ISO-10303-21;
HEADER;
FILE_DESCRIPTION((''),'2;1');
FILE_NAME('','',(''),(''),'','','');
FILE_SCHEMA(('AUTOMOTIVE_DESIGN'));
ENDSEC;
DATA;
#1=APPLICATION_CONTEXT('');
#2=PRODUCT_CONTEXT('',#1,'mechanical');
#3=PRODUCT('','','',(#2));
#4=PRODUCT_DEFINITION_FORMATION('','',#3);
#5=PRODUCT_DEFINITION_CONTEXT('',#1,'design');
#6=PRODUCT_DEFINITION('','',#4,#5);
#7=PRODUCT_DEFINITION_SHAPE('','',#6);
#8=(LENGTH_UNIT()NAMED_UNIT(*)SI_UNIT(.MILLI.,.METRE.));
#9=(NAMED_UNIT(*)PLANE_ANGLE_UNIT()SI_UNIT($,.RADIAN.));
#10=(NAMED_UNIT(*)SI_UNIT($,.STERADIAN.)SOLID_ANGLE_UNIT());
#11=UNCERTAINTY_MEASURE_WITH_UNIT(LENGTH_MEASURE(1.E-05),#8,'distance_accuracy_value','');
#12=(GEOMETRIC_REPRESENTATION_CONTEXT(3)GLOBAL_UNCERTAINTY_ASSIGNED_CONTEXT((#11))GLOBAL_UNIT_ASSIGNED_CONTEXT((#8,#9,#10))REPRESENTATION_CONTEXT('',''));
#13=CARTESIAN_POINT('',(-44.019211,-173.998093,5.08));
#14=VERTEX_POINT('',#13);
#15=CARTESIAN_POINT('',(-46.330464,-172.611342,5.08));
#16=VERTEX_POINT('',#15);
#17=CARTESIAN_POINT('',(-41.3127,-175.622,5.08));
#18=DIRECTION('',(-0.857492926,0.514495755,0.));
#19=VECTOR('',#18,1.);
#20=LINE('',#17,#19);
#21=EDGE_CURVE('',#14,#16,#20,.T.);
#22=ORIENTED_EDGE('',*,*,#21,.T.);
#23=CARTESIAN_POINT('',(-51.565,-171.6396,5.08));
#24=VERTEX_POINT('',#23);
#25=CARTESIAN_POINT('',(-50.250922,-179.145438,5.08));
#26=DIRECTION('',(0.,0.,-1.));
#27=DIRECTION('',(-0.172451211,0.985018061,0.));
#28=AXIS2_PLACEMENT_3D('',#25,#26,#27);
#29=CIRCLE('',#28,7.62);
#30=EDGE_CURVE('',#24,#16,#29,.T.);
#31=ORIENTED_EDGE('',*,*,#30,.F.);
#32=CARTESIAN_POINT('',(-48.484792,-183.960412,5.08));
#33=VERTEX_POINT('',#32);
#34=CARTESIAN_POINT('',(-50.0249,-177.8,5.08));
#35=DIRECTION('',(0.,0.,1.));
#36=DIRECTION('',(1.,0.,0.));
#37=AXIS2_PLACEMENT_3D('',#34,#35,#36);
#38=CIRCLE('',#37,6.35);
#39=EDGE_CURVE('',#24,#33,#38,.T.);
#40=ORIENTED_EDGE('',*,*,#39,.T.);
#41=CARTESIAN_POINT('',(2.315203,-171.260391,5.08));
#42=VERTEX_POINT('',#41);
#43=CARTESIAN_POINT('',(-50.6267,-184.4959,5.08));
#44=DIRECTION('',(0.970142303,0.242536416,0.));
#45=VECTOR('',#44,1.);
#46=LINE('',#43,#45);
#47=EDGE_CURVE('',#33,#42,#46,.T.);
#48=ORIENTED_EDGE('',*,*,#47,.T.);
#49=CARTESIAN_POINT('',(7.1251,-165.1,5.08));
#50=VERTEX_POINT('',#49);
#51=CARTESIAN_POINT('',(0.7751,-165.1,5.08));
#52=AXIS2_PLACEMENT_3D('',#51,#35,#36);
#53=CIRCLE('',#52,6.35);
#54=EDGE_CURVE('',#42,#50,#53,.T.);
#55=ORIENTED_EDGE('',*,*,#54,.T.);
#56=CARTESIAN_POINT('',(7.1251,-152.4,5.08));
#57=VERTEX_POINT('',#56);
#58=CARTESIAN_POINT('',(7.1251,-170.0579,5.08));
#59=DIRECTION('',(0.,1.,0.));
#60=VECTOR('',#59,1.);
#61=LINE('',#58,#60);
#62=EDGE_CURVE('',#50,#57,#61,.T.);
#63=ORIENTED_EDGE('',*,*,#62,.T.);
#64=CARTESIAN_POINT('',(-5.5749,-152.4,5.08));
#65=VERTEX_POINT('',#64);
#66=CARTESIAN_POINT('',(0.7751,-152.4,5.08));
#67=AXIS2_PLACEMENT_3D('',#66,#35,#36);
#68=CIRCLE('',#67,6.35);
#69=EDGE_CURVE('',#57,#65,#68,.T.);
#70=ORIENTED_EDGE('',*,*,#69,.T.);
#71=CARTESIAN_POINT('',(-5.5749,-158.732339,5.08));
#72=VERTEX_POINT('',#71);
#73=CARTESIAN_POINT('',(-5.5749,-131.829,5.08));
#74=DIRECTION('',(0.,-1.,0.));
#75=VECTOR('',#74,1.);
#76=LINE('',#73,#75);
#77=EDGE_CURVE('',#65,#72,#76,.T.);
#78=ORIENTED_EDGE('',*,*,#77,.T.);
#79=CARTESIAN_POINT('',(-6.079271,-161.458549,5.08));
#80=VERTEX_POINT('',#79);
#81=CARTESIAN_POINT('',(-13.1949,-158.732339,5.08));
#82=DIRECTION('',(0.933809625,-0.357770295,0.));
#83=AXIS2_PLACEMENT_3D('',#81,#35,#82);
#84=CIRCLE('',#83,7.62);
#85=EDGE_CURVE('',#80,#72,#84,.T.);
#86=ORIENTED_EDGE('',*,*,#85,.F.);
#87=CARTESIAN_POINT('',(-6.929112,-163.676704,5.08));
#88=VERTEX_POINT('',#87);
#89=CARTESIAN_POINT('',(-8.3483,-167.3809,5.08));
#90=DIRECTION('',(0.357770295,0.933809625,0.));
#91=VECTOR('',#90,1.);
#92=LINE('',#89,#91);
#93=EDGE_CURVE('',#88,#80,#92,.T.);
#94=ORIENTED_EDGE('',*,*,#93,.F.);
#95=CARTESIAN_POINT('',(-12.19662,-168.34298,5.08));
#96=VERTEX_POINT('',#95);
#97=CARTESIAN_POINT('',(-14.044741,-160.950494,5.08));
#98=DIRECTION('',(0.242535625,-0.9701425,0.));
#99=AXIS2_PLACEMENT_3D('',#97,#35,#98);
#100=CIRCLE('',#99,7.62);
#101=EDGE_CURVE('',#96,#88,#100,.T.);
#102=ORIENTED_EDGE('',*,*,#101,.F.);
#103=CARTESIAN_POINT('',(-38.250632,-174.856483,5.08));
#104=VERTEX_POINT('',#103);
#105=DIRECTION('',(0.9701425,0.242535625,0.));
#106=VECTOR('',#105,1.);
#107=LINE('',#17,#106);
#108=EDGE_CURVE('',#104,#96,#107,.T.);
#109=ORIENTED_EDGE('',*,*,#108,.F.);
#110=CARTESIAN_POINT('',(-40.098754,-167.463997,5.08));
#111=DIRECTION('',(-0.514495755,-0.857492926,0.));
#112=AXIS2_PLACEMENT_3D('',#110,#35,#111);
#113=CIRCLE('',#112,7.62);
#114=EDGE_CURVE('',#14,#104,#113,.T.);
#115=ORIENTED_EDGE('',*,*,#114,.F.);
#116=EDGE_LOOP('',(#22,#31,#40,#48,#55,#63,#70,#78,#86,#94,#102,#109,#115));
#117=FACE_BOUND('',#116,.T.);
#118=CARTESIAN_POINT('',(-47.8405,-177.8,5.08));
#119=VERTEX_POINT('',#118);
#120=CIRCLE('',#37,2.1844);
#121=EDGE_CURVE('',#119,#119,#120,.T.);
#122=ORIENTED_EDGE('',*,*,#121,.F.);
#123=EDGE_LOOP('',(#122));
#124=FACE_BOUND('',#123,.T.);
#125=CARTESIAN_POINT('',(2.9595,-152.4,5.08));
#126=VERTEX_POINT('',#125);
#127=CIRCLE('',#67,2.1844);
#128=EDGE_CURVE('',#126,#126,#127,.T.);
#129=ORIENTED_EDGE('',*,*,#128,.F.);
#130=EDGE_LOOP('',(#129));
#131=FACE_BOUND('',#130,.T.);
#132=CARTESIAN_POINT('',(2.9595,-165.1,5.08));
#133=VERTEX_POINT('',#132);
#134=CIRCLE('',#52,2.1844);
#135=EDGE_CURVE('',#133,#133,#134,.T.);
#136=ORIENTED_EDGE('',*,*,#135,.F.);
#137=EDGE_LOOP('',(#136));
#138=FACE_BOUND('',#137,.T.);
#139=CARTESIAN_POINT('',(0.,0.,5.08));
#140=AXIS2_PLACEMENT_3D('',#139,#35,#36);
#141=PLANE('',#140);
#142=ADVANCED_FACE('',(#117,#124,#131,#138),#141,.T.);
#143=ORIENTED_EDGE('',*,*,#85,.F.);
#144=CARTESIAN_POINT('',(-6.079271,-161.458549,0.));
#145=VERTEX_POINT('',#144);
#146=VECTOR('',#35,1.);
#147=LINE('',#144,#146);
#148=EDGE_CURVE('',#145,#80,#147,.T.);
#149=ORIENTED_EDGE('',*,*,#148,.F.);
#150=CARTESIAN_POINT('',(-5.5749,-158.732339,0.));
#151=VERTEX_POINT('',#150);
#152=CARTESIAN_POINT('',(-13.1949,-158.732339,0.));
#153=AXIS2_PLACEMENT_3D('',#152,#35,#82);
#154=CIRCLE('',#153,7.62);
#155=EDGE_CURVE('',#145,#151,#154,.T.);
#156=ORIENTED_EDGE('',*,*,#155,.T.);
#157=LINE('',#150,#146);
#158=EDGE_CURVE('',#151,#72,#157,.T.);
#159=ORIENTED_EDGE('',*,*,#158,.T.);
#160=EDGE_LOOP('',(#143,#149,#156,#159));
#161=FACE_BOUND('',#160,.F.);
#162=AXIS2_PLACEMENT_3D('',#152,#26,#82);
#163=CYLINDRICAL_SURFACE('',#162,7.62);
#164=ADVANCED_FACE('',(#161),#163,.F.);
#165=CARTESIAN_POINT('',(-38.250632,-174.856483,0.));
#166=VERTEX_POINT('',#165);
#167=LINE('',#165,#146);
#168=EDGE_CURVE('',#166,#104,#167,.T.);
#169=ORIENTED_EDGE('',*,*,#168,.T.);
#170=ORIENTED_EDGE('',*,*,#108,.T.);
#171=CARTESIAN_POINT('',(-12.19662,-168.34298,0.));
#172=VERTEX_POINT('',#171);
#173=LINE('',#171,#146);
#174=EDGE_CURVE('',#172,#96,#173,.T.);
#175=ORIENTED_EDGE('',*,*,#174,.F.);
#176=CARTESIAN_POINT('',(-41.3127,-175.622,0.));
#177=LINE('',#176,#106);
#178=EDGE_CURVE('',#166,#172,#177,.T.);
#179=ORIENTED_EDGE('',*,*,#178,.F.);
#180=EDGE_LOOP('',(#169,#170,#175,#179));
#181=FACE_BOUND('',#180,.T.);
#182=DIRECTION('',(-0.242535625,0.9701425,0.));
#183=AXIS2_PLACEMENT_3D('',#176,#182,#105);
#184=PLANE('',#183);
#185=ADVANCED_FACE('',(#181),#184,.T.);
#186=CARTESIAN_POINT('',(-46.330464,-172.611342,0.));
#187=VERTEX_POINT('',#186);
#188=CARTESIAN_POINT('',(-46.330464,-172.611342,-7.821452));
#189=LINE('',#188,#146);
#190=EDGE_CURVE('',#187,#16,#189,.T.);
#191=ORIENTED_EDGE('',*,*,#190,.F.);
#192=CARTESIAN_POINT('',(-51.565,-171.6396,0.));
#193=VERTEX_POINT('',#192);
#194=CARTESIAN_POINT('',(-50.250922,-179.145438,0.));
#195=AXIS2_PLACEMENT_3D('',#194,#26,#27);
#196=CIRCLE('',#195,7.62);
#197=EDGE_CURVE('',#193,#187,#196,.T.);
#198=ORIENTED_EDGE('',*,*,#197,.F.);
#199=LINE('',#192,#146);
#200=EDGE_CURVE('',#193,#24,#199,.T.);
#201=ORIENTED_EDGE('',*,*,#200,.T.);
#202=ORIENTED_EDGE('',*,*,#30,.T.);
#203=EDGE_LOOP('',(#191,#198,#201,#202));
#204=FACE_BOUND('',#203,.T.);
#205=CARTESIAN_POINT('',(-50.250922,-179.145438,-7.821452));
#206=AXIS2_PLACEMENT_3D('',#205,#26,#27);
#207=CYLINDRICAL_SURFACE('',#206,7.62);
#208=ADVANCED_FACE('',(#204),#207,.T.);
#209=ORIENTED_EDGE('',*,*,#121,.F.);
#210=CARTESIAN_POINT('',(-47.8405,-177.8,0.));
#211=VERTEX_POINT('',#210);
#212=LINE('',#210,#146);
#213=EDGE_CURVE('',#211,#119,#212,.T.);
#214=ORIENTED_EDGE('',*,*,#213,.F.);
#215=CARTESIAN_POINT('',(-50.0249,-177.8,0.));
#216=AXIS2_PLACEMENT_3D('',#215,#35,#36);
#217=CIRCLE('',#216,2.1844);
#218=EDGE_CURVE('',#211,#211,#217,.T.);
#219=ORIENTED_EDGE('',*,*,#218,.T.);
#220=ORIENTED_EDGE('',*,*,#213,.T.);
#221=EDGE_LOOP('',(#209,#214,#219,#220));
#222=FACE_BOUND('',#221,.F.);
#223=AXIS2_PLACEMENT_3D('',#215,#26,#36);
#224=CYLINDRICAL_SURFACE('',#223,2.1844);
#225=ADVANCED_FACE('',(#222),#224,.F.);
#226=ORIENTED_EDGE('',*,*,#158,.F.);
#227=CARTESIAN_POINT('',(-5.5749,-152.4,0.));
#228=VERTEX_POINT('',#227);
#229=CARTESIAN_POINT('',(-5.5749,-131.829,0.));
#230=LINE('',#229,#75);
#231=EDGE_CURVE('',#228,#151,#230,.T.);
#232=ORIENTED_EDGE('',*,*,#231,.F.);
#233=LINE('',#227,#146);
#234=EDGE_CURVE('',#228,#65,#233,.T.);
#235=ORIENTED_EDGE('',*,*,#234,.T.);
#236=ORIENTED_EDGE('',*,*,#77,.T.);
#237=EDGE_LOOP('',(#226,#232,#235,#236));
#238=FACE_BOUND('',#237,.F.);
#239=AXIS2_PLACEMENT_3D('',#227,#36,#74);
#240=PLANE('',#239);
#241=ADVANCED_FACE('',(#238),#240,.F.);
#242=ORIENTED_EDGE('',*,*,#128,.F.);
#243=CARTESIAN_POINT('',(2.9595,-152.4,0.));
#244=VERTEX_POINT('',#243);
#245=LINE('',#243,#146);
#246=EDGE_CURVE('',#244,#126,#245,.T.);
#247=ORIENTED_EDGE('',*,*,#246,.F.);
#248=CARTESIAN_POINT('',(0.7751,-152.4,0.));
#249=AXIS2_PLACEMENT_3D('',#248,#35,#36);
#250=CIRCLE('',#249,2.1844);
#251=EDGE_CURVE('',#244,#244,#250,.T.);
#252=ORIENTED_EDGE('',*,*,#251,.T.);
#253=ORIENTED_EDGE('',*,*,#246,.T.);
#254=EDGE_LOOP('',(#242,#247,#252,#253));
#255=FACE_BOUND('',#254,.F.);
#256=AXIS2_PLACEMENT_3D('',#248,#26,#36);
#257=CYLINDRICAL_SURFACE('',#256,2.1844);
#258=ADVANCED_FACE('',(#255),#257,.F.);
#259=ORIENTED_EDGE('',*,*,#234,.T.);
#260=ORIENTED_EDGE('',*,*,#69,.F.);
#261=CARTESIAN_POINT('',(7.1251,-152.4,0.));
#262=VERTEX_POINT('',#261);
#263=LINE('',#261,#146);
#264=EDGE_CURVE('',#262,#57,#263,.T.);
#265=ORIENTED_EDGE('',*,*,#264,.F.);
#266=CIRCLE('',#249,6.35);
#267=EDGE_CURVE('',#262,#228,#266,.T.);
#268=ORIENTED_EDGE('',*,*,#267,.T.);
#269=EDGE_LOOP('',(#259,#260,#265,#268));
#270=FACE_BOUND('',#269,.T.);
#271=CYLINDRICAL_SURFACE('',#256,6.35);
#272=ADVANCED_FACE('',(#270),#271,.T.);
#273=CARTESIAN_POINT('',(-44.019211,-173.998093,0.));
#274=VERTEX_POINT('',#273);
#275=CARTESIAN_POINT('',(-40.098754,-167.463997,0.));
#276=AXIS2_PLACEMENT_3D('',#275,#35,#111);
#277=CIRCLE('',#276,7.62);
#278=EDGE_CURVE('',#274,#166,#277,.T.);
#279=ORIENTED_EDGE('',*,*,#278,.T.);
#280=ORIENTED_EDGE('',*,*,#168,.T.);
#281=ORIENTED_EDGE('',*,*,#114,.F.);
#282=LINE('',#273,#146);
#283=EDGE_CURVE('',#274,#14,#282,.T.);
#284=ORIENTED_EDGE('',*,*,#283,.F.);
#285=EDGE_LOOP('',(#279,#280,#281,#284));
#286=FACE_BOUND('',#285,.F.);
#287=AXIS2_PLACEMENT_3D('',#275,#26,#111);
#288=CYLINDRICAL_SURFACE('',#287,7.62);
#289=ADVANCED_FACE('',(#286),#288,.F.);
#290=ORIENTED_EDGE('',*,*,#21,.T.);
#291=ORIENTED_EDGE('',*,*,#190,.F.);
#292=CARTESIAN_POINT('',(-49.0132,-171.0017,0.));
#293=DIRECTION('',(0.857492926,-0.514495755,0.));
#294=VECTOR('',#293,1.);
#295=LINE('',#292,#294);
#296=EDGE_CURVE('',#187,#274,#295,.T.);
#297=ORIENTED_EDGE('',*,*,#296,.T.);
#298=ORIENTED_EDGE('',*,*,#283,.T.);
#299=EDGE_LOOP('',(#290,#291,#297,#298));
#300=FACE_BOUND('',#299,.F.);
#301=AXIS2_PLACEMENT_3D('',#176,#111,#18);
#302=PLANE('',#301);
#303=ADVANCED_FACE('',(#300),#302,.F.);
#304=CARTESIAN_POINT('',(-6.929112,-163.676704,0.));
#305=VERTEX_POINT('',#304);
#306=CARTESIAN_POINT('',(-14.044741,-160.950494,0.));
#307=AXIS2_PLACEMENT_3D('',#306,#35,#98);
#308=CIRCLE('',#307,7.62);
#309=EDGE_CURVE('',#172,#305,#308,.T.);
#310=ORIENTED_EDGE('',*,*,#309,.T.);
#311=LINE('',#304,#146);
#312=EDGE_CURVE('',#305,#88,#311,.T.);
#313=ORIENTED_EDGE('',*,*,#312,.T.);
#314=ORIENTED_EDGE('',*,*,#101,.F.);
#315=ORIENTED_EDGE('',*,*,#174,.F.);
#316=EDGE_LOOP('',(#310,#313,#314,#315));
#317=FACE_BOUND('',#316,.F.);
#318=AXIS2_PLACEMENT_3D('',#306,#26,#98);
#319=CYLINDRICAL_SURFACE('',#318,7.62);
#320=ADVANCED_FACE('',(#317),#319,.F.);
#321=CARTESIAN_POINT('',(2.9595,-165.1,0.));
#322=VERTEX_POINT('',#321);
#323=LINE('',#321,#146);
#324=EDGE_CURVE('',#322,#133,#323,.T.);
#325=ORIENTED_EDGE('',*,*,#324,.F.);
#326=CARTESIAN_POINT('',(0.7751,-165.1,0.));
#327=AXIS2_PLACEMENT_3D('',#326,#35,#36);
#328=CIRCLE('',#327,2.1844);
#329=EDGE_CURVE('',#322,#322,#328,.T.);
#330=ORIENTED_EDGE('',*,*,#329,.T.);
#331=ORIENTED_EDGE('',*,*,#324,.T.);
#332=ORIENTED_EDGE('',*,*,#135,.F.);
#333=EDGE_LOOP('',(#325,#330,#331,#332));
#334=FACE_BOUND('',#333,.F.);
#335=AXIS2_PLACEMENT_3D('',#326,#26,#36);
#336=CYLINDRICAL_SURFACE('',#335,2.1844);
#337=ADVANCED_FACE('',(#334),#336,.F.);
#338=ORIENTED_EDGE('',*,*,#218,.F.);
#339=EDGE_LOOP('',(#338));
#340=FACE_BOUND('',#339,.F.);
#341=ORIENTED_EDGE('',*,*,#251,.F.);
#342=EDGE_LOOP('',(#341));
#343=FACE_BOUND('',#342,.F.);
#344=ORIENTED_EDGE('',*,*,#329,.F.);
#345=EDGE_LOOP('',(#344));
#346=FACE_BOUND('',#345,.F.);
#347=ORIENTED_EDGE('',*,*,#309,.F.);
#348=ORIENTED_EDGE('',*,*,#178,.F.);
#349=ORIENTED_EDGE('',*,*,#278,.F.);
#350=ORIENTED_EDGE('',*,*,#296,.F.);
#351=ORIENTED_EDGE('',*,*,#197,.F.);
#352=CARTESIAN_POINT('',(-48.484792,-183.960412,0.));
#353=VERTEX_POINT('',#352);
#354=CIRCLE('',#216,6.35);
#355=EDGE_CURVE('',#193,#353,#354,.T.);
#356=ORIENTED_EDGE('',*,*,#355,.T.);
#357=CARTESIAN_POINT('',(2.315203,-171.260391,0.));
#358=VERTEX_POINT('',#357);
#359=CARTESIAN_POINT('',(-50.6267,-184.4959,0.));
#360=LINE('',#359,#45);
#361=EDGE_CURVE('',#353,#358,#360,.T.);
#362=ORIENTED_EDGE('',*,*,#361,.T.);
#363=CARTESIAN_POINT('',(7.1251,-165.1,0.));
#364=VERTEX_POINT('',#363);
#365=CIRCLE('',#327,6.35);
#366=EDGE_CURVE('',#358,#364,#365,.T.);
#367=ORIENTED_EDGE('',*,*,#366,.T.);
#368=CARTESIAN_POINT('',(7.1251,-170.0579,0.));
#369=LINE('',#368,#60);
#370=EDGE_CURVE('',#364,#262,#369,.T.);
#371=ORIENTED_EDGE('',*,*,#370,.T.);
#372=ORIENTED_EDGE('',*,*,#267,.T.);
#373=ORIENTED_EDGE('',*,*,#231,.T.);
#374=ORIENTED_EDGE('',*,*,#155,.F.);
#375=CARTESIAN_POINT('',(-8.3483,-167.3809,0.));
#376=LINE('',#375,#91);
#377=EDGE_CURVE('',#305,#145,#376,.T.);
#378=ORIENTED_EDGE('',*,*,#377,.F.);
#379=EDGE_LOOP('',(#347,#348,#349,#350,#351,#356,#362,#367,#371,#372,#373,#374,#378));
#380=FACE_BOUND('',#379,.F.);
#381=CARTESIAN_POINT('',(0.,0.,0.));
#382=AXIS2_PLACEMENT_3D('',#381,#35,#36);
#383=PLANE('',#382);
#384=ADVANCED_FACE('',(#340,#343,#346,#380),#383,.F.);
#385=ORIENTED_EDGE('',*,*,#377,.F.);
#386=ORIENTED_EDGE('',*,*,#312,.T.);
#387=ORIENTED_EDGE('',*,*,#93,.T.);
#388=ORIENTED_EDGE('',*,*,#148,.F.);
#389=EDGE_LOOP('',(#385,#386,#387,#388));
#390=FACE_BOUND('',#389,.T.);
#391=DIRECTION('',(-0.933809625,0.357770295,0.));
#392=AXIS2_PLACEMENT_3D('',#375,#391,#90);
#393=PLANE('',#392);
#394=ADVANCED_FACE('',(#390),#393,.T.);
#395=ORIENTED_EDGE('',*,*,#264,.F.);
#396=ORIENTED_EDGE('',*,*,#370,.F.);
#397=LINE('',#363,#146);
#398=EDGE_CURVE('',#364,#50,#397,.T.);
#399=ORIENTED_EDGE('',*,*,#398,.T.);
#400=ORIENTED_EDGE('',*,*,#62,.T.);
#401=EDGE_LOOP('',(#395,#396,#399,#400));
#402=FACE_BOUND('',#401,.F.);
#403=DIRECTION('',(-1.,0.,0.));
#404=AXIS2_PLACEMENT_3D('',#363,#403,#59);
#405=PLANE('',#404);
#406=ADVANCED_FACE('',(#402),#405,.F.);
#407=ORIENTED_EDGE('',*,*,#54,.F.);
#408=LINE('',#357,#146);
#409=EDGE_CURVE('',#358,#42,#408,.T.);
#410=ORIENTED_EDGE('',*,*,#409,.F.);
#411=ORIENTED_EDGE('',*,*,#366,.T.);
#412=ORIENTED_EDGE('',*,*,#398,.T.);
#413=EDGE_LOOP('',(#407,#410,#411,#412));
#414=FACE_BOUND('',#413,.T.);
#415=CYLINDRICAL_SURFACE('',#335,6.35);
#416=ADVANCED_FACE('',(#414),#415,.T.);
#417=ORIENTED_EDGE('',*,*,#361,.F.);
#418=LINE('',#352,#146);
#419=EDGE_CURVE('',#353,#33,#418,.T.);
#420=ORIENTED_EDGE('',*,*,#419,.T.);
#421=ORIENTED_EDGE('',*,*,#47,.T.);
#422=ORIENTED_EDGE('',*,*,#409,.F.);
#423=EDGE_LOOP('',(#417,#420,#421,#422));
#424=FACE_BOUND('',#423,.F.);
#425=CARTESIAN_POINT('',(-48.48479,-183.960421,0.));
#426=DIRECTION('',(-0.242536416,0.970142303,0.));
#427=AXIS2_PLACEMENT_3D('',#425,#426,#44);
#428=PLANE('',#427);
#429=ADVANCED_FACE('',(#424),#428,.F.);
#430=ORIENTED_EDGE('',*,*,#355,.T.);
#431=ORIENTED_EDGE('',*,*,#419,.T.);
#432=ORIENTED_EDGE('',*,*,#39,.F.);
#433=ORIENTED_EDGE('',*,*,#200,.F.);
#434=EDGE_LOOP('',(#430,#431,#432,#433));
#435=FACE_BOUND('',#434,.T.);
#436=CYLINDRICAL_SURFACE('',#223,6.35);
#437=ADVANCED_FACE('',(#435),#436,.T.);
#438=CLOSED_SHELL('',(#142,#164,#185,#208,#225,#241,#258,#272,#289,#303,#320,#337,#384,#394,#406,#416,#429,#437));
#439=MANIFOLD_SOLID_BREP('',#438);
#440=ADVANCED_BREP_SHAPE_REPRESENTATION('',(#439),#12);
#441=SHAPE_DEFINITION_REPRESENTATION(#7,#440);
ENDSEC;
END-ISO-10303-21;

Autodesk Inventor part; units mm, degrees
ref_plane "YZ Plane" through (0, 0, 0) normal (1, 0, 0) x (0, 1, 0)
ref_plane "XZ Plane" through (0, 0, 0) normal (0, 1, 0) x (-1, 0, 0)
ref_plane "XY Plane" through (0, 0, 0) normal (0, 0, 1) x (1, 0, 0)
sketch "Sketch2" plane through (0, 0, 0) normal (0, 0, 1) x (1, 0, 0)
  circle A0 centre (-50.0249, -177.8) radius 2.1844
  circle A1 centre (0.7751, -165.1) radius 2.1844
  circle A2 centre (0.7751, -152.4) radius 2.1844
  circle A3 centre (-50.0249, -152.4) radius 2.1844
  circle A4 centre (0.7751, -165.1) radius 6.35
  circle A5 centre (0.7751, -152.4) radius 6.35
  circle A6 centre (-50.0249, -177.8) radius 6.35
  line L0 (-5.5749, -131.829) -> (-5.5749, -160.1421)
  line L1 (-5.5749, -160.1421) -> (-51.565, -171.6396)
  line L2 (-50.6267, -184.4959) -> (7.1251, -170.0579)
  line L3 (7.1251, -170.0579) -> (7.1251, -148.3402)
  line L4 (-35.2436, -141.802) -> (-32.4116, -141.802)
  line L5 (-29.119, -141.802) -> (-26.287, -141.802)
  spline S0 degree 2 poles (-32.1725, -141.802) (-30.7653, -141.3711) (-29.3581, -141.802) knots 0 0 0 1 1 1 weights 1 1.034831 1
  spline S1 degree 3 poles (-18.0653, -168.2172) (-18.4536, -168.2172) (-18.8762, -168.1704) (-19.697, -167.9732) (-20.0954, -167.8231) (-20.8527, -167.4498) (-21.2719, -167.1795) (-22.0369, -166.5475) (-22.3831, -166.1864) (-22.9733, -165.4543) (-23.2675, -165.0121) (-23.7675, -164.0794) (-23.9738, -163.5891) (-24.3066, -162.6061) (-24.4533, -162.017) (-24.6377, -160.8215) (-24.6757, -160.2153) (-24.6621, -159.1128) (-24.6099, -158.5123) (-24.3986, -157.3309) (-24.2392, -156.75) (-23.8884, -155.7901) (-23.676, -155.3161) (-23.1679, -154.4164) (-22.8717, -153.9909) (-22.2831, -153.29) (-21.9408, -152.9459) (-21.1885, -152.3448) (-20.778, -152.0883) (-20.039, -151.7346) (-19.651, -151.5925) (-18.8526, -151.4059) (-18.4422, -151.3617) (-17.7112, -151.3617) (-17.3252, -151.4007) (-16.572, -151.5661) (-16.2047, -151.6923) (-15.5081, -152.0046) (-15.1205, -152.2298) (-14.403, -152.7599) (-14.0727, -153.0644) (-13.4595, -153.7287) (-13.1325, -154.1611) (-12.571, -155.0834) (-12.3359, -155.573) (-11.9434, -156.5769) (-11.7643, -157.1906) (-11.5273, -158.4416) (-11.469, -159.0789) (-11.4545, -160.2496) (-11.4978, -160.8932) (-11.7067, -162.1597) (-11.8725, -162.7825) (-12.2466, -163.8115) (-12.4761, -164.3187) (-13.0308, -165.2763) (-13.3566, -165.7263) (-13.9735, -166.4214) (-14.3085, -166.7415) (-15.0395, -167.2999) (-15.436, -167.5376) (-16.1507, -167.8676) (-16.528, -168.0009) (-17.3028, -168.1759) (-17.7004, -168.2172) (-18.0653, -168.2172) knots 0 0 0 0 0.1165 0.1165 0.232999 0.232999 0.369785 0.369785 0.506571 0.506571 0.651905 0.651905 0.797238 0.797238 0.963262 0.963262 1.129286 1.129286 1.294016 1.294016 1.458745 1.458745 1.600629 1.600629 1.742513 1.742513 1.875203 1.875203 2.007893 2.007893 2.120972 2.120972 2.234051 2.234051 2.340282 2.340282 2.446513 2.446513 2.569309 2.569309 2.692105 2.692105 2.84053 2.84053 2.988954 2.988954 3.163874 3.163874 3.338794 3.338794 3.515132 3.515132 3.69147 3.69147 3.843605 3.843605 3.99574 3.99574 4.122409 4.122409 4.249078 4.249078 4.358558 4.358558 4.468037 4.468037 4.468037 4.468037
  ellipse E0 centre (-18.0653, -159.6619) end of major axis (-18.0653, -154.3017) minor radius 4
  ellipse E1 centre (-18.0653, -159.6619) end of major axis (-18.0653, -161.1359) minor radius 1.1
  ellipse E2 centre (-18.0653, -127.6068) end of major axis (-18.0653, -163.5416) minor radius 12.1199 (-21.7061, -161.8819) -> (-21.3672, -162.1823) ccw
  ellipse E3 centre (-18.0653, -159.6619) end of major axis (-18.0653, -154.3017) minor radius 4 (-22.0428, -160.2294) -> (-21.7061, -161.8819) ccw
  ellipse E4 centre (-18.0653, -180.8584) end of major axis (-18.0653, -204.6203) minor radius 8.0143 (-21.8601, -159.929) -> (-22.0428, -160.2294) ccw
  line L6 (-21.8601, -159.929) -> (-20.5574, -159.929)
  ellipse E5 centre (-18.0653, -159.6619) end of major axis (-18.0653, -163.012) minor radius 2.5 (-15.5733, -159.929) -> (-20.5574, -159.929) ccw
  line L7 (-15.5733, -159.929) -> (-14.2705, -159.929)
  ellipse E6 centre (-18.0653, -180.8584) end of major axis (-18.0653, -204.6203) minor radius 8.0143 (-14.0878, -160.2294) -> (-14.2705, -159.929) ccw
  ellipse E7 centre (-18.0653, -159.6619) end of major axis (-18.0653, -154.3017) minor radius 4 (-14.4245, -161.8819) -> (-14.0878, -160.2294) ccw
  ellipse E8 centre (-18.0653, -127.6068) end of major axis (-18.0653, -163.5416) minor radius 12.1199 (-14.7634, -162.1823) -> (-14.4245, -161.8819) ccw
  line L8 (-14.7634, -162.1823) -> (-16.4184, -162.1823)
  ellipse E9 centre (-18.0653, -159.6619) end of major axis (-18.0653, -163.012) minor radius 2.5 (-19.7122, -162.1823) -> (-16.4184, -162.1823) ccw
  line L9 (-19.7122, -162.1823) -> (-21.3672, -162.1823)
  ellipse E10 centre (-18.0653, -159.6619) end of major axis (-18.0653, -158.3218) minor radius 1
  line L10 (-41.3127, -175.622) -> (-8.3483, -167.3809)
  line L11 (-8.3483, -167.3809) -> (-5.5749, -160.1421)
  line L12 (-41.3127, -175.622) -> (-49.0132, -171.0017)
  point P0 (0, 0)
  point P1 (-48.4848, -183.9604)
  point P2 (2.3152, -171.2604)
  point P3 (7.1251, -165.1)
  point P4 (7.1251, -152.4)
  point P5 (-5.5749, -152.4)
  dimension "d6" = 12.7
  dimension "d9" = 135
  dimension "d10" = 125
extrude "Extrusion2" add sketch "Sketch2" along normal blind 5.08 contours A4 | A4 A5 L3 | A4 L2 A6 L12 L10 L11 L0 A5 | A5 | A6 | L1 L12 A6
fillet "Fillet1" radius 7.62 4 edges at (-49.0132, -171.0017, 2.54) (-41.3127, -175.622, 2.54) (-8.3483, -167.3809, 2.54) (-5.5749, -160.1421, 2.54)
properties part number "back_funnel"
